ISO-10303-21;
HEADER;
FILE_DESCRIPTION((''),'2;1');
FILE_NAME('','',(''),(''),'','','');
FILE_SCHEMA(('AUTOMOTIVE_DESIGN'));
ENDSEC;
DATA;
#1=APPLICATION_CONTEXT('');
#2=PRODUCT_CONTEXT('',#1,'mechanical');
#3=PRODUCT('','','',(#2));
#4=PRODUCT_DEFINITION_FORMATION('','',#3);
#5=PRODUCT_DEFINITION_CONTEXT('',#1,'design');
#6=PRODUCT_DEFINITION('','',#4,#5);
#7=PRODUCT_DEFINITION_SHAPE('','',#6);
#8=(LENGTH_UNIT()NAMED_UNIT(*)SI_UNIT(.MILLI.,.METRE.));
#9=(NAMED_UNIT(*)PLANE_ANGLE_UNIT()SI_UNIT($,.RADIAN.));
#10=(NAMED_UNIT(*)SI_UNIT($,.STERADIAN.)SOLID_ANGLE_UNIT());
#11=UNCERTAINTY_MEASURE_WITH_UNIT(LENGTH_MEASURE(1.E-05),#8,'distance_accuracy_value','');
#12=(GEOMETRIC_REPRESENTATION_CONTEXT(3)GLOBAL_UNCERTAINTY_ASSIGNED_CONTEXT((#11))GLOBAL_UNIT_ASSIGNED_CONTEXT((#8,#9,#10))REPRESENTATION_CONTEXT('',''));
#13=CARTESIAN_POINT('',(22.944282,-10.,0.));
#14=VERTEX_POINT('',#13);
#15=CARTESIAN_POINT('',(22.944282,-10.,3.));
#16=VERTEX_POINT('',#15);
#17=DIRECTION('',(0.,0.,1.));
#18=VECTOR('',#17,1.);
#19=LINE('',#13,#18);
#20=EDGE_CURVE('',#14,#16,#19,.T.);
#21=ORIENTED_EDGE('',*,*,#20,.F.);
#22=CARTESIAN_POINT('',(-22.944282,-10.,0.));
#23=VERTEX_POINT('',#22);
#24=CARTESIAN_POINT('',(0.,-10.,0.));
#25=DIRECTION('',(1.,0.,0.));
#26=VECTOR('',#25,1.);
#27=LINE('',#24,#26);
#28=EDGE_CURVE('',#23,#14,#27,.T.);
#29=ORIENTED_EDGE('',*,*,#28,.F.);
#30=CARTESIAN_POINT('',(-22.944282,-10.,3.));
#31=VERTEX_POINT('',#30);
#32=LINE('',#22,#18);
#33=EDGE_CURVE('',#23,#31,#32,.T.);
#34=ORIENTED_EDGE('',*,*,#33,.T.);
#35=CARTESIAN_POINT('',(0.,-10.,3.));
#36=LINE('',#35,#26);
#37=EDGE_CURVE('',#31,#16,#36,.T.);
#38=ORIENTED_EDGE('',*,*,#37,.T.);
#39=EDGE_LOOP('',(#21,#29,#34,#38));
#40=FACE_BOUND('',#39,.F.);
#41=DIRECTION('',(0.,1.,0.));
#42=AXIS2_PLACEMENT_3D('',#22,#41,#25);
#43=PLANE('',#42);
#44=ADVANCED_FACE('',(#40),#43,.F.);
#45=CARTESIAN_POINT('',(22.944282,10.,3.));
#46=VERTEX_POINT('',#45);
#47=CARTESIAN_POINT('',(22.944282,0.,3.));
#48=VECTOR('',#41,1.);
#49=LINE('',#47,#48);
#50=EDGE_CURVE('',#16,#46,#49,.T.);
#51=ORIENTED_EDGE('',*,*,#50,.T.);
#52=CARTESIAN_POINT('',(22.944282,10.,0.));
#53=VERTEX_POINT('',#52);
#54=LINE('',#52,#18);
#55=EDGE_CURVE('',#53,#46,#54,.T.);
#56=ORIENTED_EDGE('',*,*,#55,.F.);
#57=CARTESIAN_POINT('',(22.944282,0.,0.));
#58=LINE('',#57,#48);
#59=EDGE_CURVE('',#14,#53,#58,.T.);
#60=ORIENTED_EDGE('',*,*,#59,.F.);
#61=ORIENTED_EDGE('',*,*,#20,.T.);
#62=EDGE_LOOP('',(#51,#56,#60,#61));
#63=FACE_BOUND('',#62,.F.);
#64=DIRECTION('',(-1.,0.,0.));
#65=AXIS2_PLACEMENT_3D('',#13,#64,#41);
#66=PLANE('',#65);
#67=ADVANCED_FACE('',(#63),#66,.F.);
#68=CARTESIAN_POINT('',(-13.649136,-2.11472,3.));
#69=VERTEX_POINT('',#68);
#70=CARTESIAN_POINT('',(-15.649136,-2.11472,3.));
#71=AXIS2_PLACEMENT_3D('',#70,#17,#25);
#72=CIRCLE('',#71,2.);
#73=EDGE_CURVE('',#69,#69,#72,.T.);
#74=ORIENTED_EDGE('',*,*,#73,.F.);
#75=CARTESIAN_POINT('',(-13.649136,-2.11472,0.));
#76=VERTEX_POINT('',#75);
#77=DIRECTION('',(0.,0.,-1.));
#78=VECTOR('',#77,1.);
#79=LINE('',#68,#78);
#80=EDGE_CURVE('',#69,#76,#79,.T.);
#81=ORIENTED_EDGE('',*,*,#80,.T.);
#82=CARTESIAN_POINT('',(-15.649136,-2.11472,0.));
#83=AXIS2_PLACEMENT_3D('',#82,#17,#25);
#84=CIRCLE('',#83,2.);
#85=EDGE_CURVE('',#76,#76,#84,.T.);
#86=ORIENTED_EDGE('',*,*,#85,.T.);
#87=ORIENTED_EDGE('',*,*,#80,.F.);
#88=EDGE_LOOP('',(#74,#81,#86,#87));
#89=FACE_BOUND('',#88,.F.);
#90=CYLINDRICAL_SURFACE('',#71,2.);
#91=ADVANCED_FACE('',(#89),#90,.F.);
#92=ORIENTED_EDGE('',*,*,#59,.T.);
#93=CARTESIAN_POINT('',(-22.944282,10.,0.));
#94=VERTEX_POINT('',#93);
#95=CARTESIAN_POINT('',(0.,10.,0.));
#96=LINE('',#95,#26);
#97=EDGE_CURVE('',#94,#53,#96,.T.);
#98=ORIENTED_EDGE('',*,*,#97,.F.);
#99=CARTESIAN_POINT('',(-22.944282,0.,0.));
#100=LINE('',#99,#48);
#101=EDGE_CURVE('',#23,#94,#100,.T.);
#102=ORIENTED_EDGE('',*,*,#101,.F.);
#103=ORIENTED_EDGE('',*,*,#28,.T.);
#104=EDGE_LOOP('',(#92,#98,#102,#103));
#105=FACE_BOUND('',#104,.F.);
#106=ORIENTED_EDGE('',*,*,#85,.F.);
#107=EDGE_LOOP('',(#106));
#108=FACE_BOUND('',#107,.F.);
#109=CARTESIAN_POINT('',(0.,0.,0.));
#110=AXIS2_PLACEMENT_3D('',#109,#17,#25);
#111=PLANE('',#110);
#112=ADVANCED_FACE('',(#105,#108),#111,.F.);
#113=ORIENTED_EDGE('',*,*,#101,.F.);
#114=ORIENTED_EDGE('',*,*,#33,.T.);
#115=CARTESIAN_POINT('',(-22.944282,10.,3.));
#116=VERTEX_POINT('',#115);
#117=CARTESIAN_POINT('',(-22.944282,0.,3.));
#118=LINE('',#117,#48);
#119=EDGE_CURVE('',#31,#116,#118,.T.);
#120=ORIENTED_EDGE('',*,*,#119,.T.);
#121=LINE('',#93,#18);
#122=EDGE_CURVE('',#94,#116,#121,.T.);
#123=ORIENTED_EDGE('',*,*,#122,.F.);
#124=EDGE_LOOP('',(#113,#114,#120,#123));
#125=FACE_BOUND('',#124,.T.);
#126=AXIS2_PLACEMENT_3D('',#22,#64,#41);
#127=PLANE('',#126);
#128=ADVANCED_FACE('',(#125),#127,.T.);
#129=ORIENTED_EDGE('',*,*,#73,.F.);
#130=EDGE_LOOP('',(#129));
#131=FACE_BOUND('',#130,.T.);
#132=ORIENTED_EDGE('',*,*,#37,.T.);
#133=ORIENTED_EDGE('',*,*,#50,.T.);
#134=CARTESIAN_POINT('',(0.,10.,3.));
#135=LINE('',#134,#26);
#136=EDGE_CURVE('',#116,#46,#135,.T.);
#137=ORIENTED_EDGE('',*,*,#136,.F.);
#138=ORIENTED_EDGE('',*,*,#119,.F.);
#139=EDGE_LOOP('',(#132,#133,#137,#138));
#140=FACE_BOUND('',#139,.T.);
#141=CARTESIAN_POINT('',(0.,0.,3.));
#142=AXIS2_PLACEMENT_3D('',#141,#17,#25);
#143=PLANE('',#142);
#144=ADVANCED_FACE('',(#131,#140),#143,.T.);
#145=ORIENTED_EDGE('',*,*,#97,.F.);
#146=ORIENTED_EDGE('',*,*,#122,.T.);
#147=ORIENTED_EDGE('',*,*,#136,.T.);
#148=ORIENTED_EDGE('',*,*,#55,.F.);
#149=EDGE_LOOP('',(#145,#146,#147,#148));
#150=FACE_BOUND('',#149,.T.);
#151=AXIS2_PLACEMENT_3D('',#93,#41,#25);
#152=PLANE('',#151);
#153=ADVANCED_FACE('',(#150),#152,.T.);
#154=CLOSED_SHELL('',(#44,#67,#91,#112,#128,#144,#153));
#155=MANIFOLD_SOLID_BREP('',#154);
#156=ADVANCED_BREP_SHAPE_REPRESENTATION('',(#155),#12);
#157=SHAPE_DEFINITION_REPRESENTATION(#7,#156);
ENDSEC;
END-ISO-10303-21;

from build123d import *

# Parameters (mm, degrees)
F0_W          = 45.8885646038
F0_H          = 20
F1_DEPTH      = 3
F2_R          = 2
F3_DEPTH      = 52
F3_DEPTH_BACK = 25


# Not quite as in the source:
# - an extrude ends at something that could not be found from the text; its depth is read off the source's solid


with BuildPart() as f1:
    # F0 (on Top) → F1 (new body)
    with BuildSketch(Plane.XY):
        Rectangle(F0_W, F0_H)
    extrude(amount=F1_DEPTH)

    # F2 (on face) → F3 (cut, two sides)
    with BuildSketch(Plane.XY.offset(3)) as f3_sk:
        with Locations((-15.6491361558, -2.1147204097)):
            Circle(F2_R)
    extrude(amount=F3_DEPTH, mode=Mode.SUBTRACT)
    extrude(f3_sk.sketch, amount=-F3_DEPTH_BACK, mode=Mode.SUBTRACT)


solid = f1.part
